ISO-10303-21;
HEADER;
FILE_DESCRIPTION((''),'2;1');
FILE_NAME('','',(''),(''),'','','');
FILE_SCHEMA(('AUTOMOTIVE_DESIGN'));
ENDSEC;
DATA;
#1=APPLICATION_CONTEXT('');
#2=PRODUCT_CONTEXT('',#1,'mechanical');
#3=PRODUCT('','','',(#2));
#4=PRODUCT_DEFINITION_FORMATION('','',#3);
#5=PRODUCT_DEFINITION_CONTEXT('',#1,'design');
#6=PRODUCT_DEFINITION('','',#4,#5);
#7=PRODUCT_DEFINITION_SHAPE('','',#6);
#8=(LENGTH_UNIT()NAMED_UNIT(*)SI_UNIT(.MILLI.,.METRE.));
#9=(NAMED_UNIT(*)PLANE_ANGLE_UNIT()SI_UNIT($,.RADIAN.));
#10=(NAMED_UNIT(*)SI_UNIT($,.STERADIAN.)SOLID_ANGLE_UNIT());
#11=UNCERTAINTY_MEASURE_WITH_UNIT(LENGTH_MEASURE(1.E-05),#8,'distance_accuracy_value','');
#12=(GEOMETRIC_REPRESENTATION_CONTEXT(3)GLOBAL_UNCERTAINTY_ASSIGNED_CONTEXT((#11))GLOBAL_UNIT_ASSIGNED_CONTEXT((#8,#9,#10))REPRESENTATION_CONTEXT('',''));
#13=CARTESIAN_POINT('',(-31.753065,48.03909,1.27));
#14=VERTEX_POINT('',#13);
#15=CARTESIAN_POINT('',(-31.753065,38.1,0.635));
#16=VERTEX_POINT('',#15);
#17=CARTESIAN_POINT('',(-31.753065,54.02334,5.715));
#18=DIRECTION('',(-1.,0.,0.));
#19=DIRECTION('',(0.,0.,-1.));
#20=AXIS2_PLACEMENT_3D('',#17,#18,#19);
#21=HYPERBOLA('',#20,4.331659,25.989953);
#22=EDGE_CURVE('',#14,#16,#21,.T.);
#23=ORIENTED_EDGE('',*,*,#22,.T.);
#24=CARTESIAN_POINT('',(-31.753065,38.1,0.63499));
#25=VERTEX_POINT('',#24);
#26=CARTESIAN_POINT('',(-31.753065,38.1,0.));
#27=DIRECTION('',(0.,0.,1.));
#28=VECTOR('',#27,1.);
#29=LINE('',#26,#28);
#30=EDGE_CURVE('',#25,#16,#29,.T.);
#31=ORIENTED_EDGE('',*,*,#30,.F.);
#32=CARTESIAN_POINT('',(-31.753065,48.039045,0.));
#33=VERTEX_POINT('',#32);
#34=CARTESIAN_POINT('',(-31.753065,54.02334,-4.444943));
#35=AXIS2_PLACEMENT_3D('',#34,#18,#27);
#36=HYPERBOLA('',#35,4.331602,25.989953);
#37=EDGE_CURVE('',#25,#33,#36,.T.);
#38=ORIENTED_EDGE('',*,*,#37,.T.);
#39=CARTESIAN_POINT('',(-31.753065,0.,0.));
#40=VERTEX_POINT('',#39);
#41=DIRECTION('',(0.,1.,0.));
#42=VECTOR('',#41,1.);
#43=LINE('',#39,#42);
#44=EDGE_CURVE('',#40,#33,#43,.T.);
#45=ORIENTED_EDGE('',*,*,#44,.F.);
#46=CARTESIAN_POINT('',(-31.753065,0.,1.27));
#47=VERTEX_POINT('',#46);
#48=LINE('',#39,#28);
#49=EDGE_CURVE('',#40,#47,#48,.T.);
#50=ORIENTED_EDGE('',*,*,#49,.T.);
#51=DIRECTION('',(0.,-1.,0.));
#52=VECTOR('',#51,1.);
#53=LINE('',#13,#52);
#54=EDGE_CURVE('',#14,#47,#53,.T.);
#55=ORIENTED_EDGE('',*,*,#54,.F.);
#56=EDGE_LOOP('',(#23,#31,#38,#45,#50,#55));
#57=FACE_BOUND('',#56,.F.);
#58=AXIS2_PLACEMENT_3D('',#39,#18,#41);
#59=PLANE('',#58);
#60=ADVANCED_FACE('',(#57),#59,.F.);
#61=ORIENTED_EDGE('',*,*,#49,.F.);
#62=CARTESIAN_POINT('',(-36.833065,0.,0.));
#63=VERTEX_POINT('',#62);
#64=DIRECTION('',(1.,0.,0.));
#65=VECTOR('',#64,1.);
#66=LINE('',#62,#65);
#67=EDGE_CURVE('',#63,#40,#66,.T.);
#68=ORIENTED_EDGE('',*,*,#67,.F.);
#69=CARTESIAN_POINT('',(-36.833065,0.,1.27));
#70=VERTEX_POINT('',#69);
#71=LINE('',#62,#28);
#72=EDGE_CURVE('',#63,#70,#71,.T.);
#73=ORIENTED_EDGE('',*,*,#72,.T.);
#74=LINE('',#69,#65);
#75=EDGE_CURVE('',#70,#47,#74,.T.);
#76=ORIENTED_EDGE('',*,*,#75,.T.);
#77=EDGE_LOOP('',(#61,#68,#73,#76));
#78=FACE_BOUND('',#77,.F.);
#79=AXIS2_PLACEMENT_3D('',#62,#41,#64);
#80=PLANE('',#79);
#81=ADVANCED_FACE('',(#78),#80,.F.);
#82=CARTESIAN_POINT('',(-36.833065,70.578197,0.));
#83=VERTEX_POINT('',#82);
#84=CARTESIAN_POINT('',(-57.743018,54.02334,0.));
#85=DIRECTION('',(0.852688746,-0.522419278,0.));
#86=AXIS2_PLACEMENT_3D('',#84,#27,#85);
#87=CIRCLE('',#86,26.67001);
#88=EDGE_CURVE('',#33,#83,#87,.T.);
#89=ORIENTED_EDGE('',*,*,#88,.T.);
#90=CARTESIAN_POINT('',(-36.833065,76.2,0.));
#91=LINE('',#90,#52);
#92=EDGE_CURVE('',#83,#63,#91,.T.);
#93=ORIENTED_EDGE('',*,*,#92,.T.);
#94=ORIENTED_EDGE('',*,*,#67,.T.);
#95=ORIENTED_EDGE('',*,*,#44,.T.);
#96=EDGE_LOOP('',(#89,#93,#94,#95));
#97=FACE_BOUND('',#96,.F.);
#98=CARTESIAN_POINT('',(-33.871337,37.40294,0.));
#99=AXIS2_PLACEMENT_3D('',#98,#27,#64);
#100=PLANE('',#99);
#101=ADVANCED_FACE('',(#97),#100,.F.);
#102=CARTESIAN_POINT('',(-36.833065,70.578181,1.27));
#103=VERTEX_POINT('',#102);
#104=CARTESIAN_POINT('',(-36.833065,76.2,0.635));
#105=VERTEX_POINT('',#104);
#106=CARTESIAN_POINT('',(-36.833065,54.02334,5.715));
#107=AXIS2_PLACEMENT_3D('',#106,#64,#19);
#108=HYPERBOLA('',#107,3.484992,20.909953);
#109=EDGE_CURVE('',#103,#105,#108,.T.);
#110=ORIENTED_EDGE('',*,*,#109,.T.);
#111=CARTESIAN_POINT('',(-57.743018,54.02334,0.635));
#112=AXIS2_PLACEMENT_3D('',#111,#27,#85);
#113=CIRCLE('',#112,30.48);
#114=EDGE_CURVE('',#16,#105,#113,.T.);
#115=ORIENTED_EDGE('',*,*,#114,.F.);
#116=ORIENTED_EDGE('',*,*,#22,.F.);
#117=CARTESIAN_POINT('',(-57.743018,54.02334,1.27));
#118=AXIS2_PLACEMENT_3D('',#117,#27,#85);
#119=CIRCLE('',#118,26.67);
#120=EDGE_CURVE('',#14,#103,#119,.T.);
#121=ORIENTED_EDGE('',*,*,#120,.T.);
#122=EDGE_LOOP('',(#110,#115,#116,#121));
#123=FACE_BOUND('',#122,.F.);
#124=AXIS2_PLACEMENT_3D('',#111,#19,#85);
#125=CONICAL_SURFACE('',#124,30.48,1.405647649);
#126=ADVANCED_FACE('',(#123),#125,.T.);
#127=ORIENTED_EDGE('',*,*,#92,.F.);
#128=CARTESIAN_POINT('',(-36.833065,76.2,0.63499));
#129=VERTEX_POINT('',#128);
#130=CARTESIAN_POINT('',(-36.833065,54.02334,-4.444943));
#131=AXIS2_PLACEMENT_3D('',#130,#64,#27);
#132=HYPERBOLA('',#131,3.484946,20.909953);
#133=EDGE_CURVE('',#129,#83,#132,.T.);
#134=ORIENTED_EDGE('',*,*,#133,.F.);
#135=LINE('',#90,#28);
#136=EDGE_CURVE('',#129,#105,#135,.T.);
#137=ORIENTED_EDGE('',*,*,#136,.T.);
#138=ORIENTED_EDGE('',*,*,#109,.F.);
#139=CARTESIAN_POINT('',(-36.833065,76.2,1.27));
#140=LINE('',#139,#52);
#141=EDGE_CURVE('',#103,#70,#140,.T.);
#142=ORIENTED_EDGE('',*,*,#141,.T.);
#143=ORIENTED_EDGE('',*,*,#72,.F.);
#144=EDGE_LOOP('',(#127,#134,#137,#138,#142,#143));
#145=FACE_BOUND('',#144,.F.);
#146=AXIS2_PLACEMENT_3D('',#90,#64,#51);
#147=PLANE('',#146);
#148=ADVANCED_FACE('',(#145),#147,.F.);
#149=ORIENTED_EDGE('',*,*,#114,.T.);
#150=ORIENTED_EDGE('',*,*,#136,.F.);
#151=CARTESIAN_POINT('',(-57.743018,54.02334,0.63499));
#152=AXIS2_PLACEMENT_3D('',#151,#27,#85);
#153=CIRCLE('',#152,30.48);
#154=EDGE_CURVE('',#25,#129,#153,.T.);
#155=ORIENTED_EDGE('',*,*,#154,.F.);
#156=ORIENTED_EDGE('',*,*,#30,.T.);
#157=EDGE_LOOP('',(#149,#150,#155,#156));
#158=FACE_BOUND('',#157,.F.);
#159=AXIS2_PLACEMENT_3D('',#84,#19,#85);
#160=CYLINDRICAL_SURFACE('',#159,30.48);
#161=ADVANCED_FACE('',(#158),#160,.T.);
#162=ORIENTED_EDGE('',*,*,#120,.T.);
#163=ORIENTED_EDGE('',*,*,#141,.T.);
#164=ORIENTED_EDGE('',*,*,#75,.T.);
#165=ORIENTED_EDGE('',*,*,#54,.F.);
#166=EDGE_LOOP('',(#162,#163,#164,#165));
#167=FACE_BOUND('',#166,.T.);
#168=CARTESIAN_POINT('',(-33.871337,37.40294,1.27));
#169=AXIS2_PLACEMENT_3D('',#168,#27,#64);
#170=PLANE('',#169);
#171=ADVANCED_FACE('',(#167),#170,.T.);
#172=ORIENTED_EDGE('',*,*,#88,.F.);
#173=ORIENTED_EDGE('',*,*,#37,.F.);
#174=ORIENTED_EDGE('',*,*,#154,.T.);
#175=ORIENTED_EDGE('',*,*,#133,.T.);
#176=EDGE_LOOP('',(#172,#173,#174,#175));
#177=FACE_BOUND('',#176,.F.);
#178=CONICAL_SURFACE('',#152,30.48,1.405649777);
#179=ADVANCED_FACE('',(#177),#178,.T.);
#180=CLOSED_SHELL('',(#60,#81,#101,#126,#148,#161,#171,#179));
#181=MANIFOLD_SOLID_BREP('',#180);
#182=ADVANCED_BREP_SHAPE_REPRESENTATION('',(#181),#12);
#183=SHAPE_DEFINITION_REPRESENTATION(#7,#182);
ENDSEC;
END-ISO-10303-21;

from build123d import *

# Parameters (mm, degrees)
F1_DEPTH = 1.27
F2_SIZE2 = 0.635
F2_SIZE  = 3.81
F3_SIZE2 = 3.80999
F3_SIZE  = 0.63499


# Not quite as in the source:
# - a fillet or chamfer is up to 0.001 mm smaller than in the source, because OpenCascade refuses the exact size


with BuildPart() as f1:
    # F0 (on Top) → F1 (new body)
    with BuildSketch(Plane.XY):
        with BuildLine():
            Line((-36.8330654015, 25.4), (-36.8330654015, 0))
            Line((-36.8330654015, 0), (-31.7530654015, 0))
            Line((-31.7530654015, 0), (-31.7530654015, 25.4))
            Line((-31.7530654015, 25.4), (-31.7530654015, 38.1))
            ThreePointArc((-31.7530654015, 38.1), (-27.5303919686, 58.0516897911), (-36.8330654015, 76.2))
            Line((-36.8330654015, 76.2), (-36.8330654015, 25.4))
        make_face()
    extrude(amount=F1_DEPTH)

    # F2
    f2_edges = [f1.edges().sort_by_distance(p)[0] for p in [
        (-27.530392, 58.05169, 1.27),
    ]]
    f2_side = f1.faces().sort_by_distance((-33.424726, 40.272923, 1.27))[0]
    chamfer(f2_edges, length=F2_SIZE, length2=F2_SIZE2, reference=f2_side)

    # F3 (size 0.635 and 3.81 in the source; OpenCascade refuses exactly that, so slightly less here)
    f3_edges = [f1.edges().sort_by_distance(p)[0] for p in [
        (-27.530392, 58.05169, 0),
    ]]
    f3_side = f1.faces().sort_by_distance((-27.530392, 58.05169, 0.3175))[0]
    chamfer(f3_edges, length=F3_SIZE, length2=F3_SIZE2, reference=f3_side)


solid = f1.part
